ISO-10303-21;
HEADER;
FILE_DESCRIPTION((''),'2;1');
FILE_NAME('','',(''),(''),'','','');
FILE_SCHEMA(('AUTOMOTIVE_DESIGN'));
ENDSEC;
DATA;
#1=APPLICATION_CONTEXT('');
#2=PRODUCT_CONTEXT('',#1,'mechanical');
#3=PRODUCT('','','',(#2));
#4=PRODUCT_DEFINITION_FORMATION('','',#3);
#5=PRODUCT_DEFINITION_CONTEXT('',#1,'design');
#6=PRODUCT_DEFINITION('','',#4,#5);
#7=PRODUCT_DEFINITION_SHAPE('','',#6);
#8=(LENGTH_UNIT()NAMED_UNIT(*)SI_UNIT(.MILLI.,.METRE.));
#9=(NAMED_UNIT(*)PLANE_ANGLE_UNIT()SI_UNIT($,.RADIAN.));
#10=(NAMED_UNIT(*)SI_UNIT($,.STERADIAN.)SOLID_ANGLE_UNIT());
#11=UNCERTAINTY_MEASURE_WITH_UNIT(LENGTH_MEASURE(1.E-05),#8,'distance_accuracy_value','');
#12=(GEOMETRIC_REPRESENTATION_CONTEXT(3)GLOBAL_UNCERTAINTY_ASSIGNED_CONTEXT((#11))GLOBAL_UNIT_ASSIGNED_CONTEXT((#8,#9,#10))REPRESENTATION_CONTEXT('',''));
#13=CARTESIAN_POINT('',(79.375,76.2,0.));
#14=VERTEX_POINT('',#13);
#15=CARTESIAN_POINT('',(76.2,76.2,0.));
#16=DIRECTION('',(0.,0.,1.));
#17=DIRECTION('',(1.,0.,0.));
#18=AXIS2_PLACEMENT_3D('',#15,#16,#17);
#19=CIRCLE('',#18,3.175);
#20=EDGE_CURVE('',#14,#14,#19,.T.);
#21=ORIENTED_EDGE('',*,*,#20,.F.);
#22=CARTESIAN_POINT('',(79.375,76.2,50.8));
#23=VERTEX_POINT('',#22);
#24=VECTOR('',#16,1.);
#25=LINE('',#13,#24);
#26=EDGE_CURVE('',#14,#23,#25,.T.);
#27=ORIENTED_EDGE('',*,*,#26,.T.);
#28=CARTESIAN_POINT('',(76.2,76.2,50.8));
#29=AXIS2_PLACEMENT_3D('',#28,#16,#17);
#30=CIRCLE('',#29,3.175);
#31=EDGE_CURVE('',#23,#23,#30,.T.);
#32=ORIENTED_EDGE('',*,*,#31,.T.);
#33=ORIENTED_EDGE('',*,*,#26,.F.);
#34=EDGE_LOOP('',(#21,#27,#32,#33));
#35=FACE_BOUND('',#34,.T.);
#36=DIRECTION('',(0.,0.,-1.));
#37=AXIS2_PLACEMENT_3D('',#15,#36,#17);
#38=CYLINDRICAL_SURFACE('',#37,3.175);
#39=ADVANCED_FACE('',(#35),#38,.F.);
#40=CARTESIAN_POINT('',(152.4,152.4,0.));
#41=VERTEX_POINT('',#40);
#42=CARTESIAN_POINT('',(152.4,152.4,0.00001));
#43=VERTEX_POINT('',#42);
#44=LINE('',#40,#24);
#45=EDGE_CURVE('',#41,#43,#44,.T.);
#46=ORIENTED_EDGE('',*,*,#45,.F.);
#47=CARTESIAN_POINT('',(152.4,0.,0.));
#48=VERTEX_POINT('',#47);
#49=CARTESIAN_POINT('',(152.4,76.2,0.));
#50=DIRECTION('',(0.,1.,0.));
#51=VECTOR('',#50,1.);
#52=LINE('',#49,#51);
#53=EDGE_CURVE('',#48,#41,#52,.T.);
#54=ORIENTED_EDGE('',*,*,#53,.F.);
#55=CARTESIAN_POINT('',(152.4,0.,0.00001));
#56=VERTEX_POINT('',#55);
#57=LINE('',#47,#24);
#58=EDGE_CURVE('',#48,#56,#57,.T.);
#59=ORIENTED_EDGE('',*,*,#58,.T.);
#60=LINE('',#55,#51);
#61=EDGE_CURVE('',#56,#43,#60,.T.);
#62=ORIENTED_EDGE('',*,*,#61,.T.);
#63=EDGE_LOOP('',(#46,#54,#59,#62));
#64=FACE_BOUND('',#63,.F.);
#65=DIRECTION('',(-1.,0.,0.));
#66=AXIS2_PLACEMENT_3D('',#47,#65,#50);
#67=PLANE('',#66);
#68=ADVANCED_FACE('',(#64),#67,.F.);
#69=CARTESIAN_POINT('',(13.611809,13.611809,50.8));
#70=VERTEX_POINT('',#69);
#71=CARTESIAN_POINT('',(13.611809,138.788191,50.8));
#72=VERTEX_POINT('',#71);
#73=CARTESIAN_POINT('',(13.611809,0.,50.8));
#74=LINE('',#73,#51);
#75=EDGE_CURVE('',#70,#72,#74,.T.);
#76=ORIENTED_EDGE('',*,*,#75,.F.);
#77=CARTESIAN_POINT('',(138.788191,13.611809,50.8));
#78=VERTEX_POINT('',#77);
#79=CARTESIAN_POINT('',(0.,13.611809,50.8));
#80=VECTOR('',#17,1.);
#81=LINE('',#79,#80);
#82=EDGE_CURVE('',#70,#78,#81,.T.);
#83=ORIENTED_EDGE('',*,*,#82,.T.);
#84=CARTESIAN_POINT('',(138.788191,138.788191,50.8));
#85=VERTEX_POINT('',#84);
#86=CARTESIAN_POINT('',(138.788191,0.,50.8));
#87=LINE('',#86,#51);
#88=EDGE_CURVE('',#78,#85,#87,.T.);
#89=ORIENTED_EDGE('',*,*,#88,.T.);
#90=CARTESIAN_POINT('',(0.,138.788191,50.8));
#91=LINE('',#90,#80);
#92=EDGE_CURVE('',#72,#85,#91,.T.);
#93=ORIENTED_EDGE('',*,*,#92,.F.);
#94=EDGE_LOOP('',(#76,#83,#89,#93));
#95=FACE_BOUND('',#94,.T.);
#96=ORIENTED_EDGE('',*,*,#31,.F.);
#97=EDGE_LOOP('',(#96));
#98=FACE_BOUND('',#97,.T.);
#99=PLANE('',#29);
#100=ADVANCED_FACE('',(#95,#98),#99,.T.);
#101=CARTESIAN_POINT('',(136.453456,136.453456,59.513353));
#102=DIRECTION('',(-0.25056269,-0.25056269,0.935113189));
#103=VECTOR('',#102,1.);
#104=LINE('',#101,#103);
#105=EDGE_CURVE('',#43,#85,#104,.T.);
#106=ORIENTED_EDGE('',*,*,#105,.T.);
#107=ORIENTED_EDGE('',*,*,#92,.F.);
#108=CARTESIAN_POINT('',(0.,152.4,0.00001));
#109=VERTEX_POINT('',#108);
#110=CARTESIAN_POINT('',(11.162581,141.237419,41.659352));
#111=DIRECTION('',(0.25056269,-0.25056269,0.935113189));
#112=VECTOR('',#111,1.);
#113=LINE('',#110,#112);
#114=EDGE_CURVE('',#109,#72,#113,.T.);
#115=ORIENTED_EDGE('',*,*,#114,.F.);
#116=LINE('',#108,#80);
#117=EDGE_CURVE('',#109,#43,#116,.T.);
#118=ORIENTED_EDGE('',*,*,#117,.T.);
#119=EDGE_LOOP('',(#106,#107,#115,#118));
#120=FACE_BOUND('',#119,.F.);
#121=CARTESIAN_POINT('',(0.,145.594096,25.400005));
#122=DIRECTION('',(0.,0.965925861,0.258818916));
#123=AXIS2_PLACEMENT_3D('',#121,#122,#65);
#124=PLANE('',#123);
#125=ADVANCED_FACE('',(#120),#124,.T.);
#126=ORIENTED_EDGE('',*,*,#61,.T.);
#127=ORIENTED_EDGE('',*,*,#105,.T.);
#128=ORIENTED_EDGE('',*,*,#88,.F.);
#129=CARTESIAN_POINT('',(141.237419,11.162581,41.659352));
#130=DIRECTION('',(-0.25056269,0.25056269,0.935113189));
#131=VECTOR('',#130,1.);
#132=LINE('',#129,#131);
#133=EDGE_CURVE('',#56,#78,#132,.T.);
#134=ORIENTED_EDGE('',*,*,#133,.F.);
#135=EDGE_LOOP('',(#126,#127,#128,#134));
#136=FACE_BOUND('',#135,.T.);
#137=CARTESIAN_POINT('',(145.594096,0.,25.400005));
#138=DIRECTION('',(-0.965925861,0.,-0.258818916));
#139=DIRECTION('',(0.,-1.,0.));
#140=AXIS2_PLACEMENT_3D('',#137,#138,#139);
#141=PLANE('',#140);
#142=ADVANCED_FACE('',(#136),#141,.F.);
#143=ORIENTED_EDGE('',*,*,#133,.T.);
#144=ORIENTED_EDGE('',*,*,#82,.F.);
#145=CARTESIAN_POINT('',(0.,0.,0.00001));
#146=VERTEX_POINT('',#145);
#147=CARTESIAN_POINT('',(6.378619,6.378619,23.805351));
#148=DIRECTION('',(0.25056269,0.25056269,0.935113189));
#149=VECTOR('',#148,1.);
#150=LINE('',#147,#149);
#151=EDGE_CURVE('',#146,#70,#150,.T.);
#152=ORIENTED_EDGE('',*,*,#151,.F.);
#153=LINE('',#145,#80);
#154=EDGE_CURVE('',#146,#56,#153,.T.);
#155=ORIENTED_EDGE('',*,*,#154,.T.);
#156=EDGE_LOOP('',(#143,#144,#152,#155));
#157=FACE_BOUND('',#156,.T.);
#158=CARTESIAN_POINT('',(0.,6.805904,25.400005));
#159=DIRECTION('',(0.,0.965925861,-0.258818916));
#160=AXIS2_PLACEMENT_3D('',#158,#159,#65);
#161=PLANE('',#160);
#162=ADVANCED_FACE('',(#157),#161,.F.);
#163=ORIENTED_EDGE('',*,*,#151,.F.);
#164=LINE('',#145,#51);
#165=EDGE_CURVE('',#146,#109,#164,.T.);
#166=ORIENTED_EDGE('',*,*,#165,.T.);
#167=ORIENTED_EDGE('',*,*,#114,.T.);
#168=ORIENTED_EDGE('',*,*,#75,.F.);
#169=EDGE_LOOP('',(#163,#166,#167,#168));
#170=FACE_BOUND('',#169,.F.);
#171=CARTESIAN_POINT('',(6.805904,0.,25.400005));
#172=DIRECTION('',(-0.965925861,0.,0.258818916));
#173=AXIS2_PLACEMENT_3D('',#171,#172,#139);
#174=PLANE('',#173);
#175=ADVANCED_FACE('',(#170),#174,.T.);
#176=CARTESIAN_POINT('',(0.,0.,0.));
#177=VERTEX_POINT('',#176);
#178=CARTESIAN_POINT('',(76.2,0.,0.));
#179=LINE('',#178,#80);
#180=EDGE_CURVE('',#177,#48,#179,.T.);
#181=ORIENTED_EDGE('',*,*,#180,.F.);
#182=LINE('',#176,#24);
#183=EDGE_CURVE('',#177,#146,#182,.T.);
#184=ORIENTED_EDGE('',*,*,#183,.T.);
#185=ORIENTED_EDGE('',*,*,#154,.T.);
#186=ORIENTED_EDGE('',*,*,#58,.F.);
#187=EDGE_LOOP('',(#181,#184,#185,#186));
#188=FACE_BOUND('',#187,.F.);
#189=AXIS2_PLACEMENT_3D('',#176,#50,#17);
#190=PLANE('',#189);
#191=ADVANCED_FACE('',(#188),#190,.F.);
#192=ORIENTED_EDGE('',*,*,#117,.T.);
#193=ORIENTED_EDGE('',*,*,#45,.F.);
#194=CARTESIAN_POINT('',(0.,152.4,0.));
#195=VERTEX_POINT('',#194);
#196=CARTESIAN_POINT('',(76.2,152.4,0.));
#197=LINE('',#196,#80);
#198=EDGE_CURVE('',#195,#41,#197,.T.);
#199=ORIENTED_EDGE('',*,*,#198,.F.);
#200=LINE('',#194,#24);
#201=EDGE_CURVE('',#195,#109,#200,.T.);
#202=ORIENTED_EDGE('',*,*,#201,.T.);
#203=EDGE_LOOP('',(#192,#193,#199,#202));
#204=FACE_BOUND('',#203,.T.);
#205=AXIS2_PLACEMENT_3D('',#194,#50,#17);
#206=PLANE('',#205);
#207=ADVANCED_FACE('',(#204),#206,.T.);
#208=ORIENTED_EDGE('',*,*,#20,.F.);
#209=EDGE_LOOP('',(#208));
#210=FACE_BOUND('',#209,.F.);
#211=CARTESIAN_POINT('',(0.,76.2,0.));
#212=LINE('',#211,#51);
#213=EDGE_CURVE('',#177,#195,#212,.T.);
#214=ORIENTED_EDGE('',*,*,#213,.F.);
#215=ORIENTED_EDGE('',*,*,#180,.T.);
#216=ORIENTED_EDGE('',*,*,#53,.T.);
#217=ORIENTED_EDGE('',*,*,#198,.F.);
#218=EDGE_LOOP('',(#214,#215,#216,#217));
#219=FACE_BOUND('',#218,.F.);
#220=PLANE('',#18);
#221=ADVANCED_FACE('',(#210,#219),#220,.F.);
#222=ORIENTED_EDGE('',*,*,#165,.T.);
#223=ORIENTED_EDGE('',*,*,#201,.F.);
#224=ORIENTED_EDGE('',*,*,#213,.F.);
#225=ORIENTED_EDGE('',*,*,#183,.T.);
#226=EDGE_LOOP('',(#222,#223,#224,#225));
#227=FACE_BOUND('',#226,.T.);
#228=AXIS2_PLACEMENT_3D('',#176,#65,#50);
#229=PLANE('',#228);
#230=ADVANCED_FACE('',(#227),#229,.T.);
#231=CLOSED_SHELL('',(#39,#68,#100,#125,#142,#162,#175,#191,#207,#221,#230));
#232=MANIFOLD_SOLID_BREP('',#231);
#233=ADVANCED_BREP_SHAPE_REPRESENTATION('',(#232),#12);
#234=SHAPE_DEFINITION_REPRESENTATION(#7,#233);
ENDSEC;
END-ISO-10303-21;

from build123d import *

# Parameters (mm, degrees)
F0_W     = 152.4
F0_H     = 152.4
F0_R     = 3.175
F1_DEPTH = 50.8
F2_SIZE2 = 13.611809
F2_SIZE  = 50.79999


# Not quite as in the source:
# - a fillet or chamfer is up to 0.001 mm smaller than in the source, because OpenCascade refuses the exact size
# - a feature names something its author has since deleted; it is built from what else it names


with BuildPart() as f1:
    # F0 (on Top) → F1 (new body)
    with BuildSketch(Plane.XY):
        with Locations((76.2, 76.2)):
            Rectangle(F0_W, F0_H)
        with Locations((76.2, 76.2)):
            Circle(F0_R, mode=Mode.SUBTRACT)
    extrude(amount=F1_DEPTH)

    # F2 (size 50.8 and 13.6118189755 in the source; OpenCascade refuses exactly that, so slightly less here)
    f2_edges = [f1.edges().sort_by_distance(p)[0] for p in [
        (0, 76.2, 50.8),
        (76.2, 152.4, 50.8),
        (152.4, 76.2, 50.8),
        (76.2, 0, 50.8),
    ]]
    chamfer(f2_edges, length=F2_SIZE, length2=F2_SIZE2)


solid = f1.part
